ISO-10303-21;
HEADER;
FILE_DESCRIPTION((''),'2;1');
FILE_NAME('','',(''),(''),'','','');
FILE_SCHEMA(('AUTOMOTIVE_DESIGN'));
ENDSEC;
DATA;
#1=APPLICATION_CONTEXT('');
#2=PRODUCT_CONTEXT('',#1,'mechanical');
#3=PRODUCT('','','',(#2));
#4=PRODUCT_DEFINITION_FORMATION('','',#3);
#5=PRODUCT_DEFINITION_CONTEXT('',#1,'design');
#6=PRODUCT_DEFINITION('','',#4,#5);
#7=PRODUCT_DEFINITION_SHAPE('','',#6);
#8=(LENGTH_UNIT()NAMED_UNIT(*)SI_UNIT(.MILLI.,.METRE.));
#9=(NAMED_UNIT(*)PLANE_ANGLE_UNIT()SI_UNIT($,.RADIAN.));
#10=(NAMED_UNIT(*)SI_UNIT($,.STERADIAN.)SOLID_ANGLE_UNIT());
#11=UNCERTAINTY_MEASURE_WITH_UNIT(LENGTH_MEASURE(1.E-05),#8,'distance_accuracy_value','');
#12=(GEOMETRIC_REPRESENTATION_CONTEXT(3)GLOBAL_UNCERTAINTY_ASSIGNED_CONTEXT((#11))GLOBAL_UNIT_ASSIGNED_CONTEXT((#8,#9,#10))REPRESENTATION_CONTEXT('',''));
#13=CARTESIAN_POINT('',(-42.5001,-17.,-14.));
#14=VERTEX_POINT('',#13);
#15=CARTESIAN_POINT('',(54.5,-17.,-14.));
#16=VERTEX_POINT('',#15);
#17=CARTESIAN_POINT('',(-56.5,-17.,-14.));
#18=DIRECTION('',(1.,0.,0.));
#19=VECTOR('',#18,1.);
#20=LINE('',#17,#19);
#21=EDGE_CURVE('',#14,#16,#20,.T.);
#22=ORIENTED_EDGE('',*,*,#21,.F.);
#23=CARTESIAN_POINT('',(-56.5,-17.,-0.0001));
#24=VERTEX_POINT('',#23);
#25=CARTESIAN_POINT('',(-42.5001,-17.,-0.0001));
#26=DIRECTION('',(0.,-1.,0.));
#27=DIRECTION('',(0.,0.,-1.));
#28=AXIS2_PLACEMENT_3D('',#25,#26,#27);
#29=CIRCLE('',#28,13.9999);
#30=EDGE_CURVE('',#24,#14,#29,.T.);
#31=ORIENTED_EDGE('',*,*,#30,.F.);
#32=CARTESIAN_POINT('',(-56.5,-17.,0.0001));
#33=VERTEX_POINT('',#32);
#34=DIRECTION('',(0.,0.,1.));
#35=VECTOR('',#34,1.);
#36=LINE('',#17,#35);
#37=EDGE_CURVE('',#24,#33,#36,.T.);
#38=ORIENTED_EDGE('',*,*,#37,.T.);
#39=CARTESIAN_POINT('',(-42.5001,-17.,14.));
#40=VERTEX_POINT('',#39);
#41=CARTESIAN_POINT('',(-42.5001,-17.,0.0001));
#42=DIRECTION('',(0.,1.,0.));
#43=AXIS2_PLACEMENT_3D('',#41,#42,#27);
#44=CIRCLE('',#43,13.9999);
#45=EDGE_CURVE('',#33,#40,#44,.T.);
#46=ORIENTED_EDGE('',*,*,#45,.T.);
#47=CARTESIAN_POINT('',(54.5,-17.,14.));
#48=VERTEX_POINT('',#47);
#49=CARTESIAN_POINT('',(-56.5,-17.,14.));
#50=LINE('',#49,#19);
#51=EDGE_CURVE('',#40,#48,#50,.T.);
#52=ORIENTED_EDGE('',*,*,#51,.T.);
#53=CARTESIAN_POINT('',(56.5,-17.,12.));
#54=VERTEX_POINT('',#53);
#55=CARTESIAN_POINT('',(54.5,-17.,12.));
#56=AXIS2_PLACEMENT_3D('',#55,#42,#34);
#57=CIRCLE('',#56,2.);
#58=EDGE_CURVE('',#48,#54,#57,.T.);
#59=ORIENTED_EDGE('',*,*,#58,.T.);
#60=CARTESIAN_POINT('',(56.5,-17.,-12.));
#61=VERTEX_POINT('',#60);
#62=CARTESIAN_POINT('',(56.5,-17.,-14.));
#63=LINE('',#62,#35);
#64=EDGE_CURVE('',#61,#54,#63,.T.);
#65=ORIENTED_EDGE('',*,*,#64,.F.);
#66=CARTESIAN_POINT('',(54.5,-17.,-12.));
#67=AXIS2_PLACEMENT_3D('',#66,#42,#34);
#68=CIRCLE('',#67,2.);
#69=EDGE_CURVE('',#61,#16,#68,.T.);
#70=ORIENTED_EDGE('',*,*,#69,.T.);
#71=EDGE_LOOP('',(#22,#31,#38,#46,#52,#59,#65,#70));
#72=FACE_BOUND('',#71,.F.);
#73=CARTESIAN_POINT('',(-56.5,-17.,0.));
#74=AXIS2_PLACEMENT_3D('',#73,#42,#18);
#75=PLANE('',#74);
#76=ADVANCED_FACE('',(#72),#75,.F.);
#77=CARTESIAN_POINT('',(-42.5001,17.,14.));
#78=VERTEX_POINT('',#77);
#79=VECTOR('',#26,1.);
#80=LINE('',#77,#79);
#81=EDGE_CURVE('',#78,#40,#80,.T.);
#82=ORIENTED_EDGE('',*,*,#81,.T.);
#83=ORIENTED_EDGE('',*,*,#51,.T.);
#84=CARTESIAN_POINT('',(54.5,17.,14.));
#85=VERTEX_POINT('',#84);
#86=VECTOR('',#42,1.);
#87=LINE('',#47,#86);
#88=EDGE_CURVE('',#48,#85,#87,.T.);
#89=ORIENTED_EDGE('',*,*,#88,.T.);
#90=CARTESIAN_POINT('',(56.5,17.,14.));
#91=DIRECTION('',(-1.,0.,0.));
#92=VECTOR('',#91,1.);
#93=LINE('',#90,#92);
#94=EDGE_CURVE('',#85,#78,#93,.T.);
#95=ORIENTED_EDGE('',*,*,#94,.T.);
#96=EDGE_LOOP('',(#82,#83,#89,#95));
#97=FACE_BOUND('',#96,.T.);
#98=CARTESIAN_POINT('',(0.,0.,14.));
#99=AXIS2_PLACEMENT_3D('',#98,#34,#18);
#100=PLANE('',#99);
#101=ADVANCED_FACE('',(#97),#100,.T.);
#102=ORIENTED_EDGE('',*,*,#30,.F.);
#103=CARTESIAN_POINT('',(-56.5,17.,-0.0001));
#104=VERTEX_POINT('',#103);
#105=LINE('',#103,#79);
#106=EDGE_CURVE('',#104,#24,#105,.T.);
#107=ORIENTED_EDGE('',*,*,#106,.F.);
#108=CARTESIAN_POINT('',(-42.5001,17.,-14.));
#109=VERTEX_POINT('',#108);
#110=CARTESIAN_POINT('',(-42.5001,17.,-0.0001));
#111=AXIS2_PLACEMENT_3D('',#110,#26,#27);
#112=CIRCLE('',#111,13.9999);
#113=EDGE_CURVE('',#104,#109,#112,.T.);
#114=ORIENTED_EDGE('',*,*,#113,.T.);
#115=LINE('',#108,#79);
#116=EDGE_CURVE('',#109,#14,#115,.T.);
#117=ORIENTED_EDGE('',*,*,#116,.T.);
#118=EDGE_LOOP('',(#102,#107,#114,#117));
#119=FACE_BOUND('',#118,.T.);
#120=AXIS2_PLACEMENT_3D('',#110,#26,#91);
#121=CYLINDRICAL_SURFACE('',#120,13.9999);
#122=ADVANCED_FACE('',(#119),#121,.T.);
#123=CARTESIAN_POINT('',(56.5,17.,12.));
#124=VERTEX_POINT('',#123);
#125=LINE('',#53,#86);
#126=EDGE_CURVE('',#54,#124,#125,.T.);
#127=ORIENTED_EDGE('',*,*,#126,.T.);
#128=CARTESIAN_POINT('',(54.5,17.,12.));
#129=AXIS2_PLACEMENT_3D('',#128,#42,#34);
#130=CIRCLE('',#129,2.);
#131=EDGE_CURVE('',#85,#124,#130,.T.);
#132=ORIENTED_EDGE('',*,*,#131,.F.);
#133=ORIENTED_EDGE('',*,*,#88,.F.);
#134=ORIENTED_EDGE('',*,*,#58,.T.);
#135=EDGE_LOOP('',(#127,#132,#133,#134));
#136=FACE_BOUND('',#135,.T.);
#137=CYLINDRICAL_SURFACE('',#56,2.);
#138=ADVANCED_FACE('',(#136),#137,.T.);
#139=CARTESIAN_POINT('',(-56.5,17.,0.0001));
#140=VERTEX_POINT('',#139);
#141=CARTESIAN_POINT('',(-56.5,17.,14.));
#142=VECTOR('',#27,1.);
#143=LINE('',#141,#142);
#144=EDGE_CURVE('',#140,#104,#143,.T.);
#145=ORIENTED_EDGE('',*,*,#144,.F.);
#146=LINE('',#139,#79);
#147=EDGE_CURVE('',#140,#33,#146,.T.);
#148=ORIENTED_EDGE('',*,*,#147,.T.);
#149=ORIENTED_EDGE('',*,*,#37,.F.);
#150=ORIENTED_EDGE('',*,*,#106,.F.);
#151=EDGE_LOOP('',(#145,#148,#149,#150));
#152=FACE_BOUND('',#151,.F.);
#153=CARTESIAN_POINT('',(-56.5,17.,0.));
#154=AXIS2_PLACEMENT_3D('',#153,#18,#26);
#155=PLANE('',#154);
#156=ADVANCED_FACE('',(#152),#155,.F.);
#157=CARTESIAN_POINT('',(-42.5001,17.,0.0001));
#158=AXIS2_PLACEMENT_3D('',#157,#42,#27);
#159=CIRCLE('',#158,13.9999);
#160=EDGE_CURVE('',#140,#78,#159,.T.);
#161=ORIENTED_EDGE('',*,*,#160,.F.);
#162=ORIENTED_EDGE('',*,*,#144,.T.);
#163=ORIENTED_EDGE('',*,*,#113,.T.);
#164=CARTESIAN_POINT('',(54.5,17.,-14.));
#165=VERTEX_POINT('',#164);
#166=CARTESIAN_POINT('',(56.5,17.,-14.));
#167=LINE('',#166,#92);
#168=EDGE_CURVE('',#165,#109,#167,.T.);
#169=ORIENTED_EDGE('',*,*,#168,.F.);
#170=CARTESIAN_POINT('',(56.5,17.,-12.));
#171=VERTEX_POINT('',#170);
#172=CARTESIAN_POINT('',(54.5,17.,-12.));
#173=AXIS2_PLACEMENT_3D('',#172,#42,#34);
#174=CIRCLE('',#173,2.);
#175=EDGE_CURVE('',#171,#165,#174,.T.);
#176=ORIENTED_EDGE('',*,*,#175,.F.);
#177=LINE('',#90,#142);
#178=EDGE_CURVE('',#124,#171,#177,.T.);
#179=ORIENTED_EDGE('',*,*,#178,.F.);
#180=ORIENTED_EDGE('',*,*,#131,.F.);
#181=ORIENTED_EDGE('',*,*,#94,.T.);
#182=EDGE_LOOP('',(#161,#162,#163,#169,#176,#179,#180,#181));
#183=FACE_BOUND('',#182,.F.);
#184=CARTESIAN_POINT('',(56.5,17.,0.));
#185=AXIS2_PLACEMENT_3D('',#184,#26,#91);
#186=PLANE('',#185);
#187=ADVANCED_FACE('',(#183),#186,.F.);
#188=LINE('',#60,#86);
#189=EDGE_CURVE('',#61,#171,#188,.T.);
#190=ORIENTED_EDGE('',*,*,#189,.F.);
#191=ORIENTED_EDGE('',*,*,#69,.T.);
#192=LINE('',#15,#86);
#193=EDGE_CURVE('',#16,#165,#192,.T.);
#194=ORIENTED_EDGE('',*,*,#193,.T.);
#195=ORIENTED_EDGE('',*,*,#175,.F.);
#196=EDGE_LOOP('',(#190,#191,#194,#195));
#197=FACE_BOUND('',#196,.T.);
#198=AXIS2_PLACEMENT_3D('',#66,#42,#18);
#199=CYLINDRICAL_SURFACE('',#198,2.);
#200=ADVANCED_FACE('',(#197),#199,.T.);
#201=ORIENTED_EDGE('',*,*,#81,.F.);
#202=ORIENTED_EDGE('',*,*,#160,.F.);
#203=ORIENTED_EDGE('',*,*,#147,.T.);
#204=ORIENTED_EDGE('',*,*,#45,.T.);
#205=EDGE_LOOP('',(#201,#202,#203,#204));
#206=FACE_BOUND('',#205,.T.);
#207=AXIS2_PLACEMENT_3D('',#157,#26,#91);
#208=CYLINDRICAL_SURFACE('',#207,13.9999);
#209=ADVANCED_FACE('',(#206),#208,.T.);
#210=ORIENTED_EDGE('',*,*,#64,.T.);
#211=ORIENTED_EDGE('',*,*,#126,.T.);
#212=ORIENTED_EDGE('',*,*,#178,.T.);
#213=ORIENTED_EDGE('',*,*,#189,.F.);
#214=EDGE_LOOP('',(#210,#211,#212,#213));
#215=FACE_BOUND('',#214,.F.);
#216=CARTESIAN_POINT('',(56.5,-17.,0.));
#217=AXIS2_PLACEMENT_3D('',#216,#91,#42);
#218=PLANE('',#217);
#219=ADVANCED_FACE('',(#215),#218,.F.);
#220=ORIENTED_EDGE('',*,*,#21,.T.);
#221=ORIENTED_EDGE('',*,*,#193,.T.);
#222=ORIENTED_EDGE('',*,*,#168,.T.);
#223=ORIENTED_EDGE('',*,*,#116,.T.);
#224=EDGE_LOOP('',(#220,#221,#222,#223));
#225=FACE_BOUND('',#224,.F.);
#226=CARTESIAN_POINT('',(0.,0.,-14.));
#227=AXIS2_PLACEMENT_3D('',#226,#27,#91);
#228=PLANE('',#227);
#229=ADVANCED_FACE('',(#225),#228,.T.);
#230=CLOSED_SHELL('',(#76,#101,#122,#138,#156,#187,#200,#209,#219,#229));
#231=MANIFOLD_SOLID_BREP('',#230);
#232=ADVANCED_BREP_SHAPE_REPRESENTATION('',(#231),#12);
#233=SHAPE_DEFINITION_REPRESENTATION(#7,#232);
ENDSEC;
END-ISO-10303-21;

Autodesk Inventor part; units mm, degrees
ref_plane "YZ Plane" through (0, 0, 0) normal (1, 0, 0) x (0, 1, 0)
ref_plane "XZ Plane" through (0, 0, 0) normal (0, 1, 0) x (-1, 0, 0)
ref_plane "XY Plane" through (0, 0, 0) normal (0, 0, 1) x (1, 0, 0)
sketch "スケッチ1" plane through (0, 0, 0) normal (0, 0, 1) x (1, 0, 0)
  line L0 (-56.5, -17) -> (56.5, -17)
  line L1 (56.5, -17) -> (56.5, 17)
  line L2 (56.5, 17) -> (-56.5, 17)
  line L3 (-56.5, 17) -> (-56.5, -17)
  line L4 (-56.5, -17) -> (56.5, 17) construction
  line L5 (56.5, -17) -> (-56.5, 17) construction
  point P0 (0, 0)
  dimension "d0" = 113
  dimension "d1" = 34
extrude "押し出し1" add sketch "スケッチ1" along normal blind 14
mirror "ミラー1" about plane through (0, 0, 0) normal (0, 0, -1) of "押し出し1"
fillet "フィレット1" radius 14 2 edges at (-56.5, 0, 14) (-56.5, 0, -14)
fillet "フィレット2" radius 2 2 edges at (56.5, 0, 14) (56.5, 0, -14)
properties part number "バッテリー(G6 HI-VOLTAGE 2400MAH 3S 80CMAX LIPO)"
